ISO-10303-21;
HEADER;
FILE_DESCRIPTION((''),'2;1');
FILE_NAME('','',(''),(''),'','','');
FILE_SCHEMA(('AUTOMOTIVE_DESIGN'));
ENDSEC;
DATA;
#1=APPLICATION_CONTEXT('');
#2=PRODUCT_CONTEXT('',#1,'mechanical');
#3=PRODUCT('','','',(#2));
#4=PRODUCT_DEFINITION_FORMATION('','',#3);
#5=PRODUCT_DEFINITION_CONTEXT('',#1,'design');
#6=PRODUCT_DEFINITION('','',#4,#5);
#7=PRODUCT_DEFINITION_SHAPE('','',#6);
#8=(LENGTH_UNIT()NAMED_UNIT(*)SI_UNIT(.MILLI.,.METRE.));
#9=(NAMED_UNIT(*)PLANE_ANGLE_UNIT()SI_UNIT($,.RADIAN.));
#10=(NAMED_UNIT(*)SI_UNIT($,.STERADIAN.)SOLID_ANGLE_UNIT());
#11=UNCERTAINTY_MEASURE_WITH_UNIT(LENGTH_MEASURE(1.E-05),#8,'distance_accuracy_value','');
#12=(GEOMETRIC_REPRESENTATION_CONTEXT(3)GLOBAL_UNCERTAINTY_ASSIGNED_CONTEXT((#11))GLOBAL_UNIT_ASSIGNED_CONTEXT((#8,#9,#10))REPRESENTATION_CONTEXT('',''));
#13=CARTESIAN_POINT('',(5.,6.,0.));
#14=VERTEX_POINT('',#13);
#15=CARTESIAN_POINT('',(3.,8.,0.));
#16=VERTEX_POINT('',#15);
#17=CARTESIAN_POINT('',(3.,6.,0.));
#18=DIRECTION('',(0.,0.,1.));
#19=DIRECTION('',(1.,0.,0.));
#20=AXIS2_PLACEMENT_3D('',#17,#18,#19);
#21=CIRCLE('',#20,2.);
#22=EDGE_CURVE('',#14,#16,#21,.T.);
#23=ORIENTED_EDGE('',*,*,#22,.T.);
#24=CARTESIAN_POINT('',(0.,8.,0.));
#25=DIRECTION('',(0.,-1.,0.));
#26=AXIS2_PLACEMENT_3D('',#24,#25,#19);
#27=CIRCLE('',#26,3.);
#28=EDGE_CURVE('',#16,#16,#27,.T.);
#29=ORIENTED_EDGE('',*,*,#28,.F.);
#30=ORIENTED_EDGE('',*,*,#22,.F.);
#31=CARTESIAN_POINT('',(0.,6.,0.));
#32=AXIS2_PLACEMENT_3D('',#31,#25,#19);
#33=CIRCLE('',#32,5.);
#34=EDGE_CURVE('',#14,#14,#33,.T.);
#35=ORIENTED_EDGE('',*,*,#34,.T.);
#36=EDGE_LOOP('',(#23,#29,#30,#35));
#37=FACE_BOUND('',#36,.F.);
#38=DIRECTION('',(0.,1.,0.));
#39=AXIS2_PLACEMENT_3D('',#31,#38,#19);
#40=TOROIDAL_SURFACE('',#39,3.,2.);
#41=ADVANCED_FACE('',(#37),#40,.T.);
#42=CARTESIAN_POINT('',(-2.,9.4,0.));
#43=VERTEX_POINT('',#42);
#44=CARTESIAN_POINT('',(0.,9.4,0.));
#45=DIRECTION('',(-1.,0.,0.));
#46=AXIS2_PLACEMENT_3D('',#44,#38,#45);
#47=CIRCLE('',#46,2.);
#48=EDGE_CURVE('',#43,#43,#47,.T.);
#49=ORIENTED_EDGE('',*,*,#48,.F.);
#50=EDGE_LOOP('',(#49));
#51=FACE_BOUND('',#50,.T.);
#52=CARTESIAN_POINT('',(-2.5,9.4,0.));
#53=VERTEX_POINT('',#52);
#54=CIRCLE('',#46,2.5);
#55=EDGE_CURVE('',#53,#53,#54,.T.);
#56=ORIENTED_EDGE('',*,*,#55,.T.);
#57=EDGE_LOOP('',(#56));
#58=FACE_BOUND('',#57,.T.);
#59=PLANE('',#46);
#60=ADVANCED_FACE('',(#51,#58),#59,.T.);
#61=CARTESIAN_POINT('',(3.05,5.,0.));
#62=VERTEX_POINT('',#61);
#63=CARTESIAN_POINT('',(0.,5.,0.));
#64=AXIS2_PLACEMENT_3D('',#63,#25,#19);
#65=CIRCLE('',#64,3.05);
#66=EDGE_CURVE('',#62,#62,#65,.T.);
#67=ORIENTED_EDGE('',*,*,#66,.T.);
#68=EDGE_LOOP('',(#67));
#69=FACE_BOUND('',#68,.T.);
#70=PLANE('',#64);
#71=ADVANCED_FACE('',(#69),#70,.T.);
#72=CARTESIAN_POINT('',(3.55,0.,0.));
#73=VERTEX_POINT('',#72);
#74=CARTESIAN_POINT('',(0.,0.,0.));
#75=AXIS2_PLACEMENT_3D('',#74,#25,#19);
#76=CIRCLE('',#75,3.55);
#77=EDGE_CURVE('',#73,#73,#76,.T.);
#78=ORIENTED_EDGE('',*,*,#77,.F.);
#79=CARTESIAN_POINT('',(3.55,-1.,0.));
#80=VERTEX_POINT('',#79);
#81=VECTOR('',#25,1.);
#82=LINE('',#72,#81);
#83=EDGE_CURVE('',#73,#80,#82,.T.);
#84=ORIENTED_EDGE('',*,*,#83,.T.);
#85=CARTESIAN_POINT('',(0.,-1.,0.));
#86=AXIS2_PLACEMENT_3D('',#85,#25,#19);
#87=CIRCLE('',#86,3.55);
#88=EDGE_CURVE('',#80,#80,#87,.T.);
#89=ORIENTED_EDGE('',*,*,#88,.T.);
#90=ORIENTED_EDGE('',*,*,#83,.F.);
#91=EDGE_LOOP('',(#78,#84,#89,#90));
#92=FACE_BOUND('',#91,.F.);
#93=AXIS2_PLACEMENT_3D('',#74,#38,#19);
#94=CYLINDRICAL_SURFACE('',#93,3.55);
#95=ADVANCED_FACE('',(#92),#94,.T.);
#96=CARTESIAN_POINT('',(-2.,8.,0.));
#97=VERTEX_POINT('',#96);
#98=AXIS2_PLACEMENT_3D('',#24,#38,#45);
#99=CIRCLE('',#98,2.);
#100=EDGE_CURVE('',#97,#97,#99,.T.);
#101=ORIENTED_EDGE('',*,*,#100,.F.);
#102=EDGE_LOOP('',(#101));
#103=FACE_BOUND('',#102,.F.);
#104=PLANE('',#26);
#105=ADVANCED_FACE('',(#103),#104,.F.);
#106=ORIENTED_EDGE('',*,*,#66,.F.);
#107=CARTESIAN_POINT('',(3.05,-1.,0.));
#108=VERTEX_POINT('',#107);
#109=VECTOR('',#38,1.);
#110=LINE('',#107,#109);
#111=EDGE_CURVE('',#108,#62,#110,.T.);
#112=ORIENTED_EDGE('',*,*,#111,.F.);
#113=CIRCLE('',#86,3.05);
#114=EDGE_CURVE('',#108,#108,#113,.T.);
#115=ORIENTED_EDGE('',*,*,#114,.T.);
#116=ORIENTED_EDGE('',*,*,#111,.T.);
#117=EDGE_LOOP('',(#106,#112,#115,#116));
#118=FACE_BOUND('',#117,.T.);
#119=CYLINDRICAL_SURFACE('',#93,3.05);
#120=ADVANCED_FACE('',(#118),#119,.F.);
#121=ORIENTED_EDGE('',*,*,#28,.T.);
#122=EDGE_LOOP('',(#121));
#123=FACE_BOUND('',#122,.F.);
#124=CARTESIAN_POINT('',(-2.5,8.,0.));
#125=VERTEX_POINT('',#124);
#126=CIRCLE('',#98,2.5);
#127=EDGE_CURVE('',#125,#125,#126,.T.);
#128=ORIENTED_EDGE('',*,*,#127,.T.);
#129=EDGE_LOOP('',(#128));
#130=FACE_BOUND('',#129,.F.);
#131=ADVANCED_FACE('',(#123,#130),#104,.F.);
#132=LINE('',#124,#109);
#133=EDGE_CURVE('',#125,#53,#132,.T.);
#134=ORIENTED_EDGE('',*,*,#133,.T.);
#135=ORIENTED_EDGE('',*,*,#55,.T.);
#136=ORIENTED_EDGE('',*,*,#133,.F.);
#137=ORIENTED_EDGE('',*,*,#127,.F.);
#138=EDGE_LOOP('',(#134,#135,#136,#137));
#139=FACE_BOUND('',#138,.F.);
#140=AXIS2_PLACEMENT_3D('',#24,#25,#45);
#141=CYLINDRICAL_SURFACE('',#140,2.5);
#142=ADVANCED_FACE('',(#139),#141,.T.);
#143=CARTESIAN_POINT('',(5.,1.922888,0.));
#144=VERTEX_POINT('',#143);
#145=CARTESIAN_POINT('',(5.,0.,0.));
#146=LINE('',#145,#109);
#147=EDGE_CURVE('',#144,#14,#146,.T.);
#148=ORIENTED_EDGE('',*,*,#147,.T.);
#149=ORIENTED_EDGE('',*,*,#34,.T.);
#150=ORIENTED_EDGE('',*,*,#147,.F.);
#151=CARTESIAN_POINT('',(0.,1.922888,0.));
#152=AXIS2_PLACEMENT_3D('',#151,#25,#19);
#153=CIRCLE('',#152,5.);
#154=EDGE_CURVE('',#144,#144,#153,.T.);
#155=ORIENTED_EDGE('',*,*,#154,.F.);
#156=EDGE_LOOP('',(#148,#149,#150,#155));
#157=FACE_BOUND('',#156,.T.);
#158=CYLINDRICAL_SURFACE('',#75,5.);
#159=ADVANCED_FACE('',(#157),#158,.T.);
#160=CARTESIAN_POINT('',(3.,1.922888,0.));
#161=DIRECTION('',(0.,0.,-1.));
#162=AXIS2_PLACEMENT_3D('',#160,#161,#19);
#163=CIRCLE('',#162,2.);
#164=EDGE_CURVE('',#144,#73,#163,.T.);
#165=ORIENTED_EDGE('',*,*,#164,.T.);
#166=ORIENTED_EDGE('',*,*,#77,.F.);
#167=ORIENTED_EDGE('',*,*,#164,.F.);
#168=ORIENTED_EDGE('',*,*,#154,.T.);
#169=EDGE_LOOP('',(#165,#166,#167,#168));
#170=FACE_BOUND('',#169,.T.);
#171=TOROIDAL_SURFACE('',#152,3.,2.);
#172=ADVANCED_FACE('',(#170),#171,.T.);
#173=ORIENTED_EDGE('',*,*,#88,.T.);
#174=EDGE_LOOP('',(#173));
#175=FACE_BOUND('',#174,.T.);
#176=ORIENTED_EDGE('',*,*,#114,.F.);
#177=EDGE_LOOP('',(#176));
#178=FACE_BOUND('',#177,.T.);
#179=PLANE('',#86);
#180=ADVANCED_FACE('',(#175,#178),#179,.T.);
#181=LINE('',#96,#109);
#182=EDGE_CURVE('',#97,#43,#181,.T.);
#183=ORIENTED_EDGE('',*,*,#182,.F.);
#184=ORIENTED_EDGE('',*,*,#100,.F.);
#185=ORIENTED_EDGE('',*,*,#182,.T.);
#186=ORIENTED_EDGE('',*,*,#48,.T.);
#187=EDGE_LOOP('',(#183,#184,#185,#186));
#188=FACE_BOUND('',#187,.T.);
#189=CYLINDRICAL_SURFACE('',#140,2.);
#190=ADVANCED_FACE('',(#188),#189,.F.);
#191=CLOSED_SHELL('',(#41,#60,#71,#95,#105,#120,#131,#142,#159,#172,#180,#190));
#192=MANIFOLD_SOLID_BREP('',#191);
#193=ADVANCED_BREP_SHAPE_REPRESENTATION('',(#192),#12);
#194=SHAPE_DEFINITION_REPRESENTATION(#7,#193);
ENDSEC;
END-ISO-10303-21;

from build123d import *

# Parameters (mm, degrees)
F0_R     = 3.55
F0_R_2   = 3.05
F1_DEPTH = 1
F2_R     = 5
F3_DEPTH = 8
F5_R     = 2.5
F5_R_2   = 2
F6_DEPTH = 1.4
F8_DEPTH = 5


# Not quite as in the source:
# - a fillet or chamfer that OpenCascade refuses, or shapes differently, is made with other operations: its cross-section is extruded or revolved along the edge and cut away or added


with BuildPart() as f1:
    # F0 (on Front) → F1 (new body)
    with BuildSketch(Plane.XZ):
        Circle(F0_R)
        Circle(F0_R_2, mode=Mode.SUBTRACT)
    extrude(amount=F1_DEPTH)

    # F2 (on Front) → F3 (join)
    with BuildSketch(Plane.XZ):
        Circle(F2_R)
    extrude(amount=-F3_DEPTH)

    # F5 (on face) → F6 (join)
    with BuildSketch(Plane(origin=(0, 8, 0), x_dir=(-1, 0, 0), z_dir=(0, 1, 0))):
        Circle(F5_R)
        Circle(F5_R_2, mode=Mode.SUBTRACT)
    extrude(amount=F6_DEPTH)

    # F7: fillet of radius 2 on 2 edges, made by hand

    # F7_s1 → F7_t2 (revolve, cut)
    with BuildSketch(Plane.XY):
        with BuildLine():
            ThreePointArc((5, 6), (4.4142135624, 7.4142135624), (3, 8))
            Line((3, 8), (5, 8))
            Line((5, 8), (5, 6))
        make_face()
    revolve(axis=Axis((0, 8, 0), (0, -1, 0)), mode=Mode.SUBTRACT)

    # F7_s3 → F7_t4 (revolve, cut)
    with BuildSketch(Plane.XY):
        with BuildLine():
            ThreePointArc((5, 1.9228884523), (4.5968719423, 0.7187289944), (3.55, 0))
            Line((3.55, 0), (5, 0))
            Line((5, 0), (5, 1.9228884523))
        make_face()
    revolve(axis=Axis((0, 0, 0), (0, -1, 0)), mode=Mode.SUBTRACT)

    # F8 (cut): a face of the model
    f8_faces = [f1.faces().sort_by_distance(p)[0] for p in [
        (0, 0, 0),
    ]]
    extrude(f8_faces, amount=-F8_DEPTH, mode=Mode.SUBTRACT)


solid = f1.part
